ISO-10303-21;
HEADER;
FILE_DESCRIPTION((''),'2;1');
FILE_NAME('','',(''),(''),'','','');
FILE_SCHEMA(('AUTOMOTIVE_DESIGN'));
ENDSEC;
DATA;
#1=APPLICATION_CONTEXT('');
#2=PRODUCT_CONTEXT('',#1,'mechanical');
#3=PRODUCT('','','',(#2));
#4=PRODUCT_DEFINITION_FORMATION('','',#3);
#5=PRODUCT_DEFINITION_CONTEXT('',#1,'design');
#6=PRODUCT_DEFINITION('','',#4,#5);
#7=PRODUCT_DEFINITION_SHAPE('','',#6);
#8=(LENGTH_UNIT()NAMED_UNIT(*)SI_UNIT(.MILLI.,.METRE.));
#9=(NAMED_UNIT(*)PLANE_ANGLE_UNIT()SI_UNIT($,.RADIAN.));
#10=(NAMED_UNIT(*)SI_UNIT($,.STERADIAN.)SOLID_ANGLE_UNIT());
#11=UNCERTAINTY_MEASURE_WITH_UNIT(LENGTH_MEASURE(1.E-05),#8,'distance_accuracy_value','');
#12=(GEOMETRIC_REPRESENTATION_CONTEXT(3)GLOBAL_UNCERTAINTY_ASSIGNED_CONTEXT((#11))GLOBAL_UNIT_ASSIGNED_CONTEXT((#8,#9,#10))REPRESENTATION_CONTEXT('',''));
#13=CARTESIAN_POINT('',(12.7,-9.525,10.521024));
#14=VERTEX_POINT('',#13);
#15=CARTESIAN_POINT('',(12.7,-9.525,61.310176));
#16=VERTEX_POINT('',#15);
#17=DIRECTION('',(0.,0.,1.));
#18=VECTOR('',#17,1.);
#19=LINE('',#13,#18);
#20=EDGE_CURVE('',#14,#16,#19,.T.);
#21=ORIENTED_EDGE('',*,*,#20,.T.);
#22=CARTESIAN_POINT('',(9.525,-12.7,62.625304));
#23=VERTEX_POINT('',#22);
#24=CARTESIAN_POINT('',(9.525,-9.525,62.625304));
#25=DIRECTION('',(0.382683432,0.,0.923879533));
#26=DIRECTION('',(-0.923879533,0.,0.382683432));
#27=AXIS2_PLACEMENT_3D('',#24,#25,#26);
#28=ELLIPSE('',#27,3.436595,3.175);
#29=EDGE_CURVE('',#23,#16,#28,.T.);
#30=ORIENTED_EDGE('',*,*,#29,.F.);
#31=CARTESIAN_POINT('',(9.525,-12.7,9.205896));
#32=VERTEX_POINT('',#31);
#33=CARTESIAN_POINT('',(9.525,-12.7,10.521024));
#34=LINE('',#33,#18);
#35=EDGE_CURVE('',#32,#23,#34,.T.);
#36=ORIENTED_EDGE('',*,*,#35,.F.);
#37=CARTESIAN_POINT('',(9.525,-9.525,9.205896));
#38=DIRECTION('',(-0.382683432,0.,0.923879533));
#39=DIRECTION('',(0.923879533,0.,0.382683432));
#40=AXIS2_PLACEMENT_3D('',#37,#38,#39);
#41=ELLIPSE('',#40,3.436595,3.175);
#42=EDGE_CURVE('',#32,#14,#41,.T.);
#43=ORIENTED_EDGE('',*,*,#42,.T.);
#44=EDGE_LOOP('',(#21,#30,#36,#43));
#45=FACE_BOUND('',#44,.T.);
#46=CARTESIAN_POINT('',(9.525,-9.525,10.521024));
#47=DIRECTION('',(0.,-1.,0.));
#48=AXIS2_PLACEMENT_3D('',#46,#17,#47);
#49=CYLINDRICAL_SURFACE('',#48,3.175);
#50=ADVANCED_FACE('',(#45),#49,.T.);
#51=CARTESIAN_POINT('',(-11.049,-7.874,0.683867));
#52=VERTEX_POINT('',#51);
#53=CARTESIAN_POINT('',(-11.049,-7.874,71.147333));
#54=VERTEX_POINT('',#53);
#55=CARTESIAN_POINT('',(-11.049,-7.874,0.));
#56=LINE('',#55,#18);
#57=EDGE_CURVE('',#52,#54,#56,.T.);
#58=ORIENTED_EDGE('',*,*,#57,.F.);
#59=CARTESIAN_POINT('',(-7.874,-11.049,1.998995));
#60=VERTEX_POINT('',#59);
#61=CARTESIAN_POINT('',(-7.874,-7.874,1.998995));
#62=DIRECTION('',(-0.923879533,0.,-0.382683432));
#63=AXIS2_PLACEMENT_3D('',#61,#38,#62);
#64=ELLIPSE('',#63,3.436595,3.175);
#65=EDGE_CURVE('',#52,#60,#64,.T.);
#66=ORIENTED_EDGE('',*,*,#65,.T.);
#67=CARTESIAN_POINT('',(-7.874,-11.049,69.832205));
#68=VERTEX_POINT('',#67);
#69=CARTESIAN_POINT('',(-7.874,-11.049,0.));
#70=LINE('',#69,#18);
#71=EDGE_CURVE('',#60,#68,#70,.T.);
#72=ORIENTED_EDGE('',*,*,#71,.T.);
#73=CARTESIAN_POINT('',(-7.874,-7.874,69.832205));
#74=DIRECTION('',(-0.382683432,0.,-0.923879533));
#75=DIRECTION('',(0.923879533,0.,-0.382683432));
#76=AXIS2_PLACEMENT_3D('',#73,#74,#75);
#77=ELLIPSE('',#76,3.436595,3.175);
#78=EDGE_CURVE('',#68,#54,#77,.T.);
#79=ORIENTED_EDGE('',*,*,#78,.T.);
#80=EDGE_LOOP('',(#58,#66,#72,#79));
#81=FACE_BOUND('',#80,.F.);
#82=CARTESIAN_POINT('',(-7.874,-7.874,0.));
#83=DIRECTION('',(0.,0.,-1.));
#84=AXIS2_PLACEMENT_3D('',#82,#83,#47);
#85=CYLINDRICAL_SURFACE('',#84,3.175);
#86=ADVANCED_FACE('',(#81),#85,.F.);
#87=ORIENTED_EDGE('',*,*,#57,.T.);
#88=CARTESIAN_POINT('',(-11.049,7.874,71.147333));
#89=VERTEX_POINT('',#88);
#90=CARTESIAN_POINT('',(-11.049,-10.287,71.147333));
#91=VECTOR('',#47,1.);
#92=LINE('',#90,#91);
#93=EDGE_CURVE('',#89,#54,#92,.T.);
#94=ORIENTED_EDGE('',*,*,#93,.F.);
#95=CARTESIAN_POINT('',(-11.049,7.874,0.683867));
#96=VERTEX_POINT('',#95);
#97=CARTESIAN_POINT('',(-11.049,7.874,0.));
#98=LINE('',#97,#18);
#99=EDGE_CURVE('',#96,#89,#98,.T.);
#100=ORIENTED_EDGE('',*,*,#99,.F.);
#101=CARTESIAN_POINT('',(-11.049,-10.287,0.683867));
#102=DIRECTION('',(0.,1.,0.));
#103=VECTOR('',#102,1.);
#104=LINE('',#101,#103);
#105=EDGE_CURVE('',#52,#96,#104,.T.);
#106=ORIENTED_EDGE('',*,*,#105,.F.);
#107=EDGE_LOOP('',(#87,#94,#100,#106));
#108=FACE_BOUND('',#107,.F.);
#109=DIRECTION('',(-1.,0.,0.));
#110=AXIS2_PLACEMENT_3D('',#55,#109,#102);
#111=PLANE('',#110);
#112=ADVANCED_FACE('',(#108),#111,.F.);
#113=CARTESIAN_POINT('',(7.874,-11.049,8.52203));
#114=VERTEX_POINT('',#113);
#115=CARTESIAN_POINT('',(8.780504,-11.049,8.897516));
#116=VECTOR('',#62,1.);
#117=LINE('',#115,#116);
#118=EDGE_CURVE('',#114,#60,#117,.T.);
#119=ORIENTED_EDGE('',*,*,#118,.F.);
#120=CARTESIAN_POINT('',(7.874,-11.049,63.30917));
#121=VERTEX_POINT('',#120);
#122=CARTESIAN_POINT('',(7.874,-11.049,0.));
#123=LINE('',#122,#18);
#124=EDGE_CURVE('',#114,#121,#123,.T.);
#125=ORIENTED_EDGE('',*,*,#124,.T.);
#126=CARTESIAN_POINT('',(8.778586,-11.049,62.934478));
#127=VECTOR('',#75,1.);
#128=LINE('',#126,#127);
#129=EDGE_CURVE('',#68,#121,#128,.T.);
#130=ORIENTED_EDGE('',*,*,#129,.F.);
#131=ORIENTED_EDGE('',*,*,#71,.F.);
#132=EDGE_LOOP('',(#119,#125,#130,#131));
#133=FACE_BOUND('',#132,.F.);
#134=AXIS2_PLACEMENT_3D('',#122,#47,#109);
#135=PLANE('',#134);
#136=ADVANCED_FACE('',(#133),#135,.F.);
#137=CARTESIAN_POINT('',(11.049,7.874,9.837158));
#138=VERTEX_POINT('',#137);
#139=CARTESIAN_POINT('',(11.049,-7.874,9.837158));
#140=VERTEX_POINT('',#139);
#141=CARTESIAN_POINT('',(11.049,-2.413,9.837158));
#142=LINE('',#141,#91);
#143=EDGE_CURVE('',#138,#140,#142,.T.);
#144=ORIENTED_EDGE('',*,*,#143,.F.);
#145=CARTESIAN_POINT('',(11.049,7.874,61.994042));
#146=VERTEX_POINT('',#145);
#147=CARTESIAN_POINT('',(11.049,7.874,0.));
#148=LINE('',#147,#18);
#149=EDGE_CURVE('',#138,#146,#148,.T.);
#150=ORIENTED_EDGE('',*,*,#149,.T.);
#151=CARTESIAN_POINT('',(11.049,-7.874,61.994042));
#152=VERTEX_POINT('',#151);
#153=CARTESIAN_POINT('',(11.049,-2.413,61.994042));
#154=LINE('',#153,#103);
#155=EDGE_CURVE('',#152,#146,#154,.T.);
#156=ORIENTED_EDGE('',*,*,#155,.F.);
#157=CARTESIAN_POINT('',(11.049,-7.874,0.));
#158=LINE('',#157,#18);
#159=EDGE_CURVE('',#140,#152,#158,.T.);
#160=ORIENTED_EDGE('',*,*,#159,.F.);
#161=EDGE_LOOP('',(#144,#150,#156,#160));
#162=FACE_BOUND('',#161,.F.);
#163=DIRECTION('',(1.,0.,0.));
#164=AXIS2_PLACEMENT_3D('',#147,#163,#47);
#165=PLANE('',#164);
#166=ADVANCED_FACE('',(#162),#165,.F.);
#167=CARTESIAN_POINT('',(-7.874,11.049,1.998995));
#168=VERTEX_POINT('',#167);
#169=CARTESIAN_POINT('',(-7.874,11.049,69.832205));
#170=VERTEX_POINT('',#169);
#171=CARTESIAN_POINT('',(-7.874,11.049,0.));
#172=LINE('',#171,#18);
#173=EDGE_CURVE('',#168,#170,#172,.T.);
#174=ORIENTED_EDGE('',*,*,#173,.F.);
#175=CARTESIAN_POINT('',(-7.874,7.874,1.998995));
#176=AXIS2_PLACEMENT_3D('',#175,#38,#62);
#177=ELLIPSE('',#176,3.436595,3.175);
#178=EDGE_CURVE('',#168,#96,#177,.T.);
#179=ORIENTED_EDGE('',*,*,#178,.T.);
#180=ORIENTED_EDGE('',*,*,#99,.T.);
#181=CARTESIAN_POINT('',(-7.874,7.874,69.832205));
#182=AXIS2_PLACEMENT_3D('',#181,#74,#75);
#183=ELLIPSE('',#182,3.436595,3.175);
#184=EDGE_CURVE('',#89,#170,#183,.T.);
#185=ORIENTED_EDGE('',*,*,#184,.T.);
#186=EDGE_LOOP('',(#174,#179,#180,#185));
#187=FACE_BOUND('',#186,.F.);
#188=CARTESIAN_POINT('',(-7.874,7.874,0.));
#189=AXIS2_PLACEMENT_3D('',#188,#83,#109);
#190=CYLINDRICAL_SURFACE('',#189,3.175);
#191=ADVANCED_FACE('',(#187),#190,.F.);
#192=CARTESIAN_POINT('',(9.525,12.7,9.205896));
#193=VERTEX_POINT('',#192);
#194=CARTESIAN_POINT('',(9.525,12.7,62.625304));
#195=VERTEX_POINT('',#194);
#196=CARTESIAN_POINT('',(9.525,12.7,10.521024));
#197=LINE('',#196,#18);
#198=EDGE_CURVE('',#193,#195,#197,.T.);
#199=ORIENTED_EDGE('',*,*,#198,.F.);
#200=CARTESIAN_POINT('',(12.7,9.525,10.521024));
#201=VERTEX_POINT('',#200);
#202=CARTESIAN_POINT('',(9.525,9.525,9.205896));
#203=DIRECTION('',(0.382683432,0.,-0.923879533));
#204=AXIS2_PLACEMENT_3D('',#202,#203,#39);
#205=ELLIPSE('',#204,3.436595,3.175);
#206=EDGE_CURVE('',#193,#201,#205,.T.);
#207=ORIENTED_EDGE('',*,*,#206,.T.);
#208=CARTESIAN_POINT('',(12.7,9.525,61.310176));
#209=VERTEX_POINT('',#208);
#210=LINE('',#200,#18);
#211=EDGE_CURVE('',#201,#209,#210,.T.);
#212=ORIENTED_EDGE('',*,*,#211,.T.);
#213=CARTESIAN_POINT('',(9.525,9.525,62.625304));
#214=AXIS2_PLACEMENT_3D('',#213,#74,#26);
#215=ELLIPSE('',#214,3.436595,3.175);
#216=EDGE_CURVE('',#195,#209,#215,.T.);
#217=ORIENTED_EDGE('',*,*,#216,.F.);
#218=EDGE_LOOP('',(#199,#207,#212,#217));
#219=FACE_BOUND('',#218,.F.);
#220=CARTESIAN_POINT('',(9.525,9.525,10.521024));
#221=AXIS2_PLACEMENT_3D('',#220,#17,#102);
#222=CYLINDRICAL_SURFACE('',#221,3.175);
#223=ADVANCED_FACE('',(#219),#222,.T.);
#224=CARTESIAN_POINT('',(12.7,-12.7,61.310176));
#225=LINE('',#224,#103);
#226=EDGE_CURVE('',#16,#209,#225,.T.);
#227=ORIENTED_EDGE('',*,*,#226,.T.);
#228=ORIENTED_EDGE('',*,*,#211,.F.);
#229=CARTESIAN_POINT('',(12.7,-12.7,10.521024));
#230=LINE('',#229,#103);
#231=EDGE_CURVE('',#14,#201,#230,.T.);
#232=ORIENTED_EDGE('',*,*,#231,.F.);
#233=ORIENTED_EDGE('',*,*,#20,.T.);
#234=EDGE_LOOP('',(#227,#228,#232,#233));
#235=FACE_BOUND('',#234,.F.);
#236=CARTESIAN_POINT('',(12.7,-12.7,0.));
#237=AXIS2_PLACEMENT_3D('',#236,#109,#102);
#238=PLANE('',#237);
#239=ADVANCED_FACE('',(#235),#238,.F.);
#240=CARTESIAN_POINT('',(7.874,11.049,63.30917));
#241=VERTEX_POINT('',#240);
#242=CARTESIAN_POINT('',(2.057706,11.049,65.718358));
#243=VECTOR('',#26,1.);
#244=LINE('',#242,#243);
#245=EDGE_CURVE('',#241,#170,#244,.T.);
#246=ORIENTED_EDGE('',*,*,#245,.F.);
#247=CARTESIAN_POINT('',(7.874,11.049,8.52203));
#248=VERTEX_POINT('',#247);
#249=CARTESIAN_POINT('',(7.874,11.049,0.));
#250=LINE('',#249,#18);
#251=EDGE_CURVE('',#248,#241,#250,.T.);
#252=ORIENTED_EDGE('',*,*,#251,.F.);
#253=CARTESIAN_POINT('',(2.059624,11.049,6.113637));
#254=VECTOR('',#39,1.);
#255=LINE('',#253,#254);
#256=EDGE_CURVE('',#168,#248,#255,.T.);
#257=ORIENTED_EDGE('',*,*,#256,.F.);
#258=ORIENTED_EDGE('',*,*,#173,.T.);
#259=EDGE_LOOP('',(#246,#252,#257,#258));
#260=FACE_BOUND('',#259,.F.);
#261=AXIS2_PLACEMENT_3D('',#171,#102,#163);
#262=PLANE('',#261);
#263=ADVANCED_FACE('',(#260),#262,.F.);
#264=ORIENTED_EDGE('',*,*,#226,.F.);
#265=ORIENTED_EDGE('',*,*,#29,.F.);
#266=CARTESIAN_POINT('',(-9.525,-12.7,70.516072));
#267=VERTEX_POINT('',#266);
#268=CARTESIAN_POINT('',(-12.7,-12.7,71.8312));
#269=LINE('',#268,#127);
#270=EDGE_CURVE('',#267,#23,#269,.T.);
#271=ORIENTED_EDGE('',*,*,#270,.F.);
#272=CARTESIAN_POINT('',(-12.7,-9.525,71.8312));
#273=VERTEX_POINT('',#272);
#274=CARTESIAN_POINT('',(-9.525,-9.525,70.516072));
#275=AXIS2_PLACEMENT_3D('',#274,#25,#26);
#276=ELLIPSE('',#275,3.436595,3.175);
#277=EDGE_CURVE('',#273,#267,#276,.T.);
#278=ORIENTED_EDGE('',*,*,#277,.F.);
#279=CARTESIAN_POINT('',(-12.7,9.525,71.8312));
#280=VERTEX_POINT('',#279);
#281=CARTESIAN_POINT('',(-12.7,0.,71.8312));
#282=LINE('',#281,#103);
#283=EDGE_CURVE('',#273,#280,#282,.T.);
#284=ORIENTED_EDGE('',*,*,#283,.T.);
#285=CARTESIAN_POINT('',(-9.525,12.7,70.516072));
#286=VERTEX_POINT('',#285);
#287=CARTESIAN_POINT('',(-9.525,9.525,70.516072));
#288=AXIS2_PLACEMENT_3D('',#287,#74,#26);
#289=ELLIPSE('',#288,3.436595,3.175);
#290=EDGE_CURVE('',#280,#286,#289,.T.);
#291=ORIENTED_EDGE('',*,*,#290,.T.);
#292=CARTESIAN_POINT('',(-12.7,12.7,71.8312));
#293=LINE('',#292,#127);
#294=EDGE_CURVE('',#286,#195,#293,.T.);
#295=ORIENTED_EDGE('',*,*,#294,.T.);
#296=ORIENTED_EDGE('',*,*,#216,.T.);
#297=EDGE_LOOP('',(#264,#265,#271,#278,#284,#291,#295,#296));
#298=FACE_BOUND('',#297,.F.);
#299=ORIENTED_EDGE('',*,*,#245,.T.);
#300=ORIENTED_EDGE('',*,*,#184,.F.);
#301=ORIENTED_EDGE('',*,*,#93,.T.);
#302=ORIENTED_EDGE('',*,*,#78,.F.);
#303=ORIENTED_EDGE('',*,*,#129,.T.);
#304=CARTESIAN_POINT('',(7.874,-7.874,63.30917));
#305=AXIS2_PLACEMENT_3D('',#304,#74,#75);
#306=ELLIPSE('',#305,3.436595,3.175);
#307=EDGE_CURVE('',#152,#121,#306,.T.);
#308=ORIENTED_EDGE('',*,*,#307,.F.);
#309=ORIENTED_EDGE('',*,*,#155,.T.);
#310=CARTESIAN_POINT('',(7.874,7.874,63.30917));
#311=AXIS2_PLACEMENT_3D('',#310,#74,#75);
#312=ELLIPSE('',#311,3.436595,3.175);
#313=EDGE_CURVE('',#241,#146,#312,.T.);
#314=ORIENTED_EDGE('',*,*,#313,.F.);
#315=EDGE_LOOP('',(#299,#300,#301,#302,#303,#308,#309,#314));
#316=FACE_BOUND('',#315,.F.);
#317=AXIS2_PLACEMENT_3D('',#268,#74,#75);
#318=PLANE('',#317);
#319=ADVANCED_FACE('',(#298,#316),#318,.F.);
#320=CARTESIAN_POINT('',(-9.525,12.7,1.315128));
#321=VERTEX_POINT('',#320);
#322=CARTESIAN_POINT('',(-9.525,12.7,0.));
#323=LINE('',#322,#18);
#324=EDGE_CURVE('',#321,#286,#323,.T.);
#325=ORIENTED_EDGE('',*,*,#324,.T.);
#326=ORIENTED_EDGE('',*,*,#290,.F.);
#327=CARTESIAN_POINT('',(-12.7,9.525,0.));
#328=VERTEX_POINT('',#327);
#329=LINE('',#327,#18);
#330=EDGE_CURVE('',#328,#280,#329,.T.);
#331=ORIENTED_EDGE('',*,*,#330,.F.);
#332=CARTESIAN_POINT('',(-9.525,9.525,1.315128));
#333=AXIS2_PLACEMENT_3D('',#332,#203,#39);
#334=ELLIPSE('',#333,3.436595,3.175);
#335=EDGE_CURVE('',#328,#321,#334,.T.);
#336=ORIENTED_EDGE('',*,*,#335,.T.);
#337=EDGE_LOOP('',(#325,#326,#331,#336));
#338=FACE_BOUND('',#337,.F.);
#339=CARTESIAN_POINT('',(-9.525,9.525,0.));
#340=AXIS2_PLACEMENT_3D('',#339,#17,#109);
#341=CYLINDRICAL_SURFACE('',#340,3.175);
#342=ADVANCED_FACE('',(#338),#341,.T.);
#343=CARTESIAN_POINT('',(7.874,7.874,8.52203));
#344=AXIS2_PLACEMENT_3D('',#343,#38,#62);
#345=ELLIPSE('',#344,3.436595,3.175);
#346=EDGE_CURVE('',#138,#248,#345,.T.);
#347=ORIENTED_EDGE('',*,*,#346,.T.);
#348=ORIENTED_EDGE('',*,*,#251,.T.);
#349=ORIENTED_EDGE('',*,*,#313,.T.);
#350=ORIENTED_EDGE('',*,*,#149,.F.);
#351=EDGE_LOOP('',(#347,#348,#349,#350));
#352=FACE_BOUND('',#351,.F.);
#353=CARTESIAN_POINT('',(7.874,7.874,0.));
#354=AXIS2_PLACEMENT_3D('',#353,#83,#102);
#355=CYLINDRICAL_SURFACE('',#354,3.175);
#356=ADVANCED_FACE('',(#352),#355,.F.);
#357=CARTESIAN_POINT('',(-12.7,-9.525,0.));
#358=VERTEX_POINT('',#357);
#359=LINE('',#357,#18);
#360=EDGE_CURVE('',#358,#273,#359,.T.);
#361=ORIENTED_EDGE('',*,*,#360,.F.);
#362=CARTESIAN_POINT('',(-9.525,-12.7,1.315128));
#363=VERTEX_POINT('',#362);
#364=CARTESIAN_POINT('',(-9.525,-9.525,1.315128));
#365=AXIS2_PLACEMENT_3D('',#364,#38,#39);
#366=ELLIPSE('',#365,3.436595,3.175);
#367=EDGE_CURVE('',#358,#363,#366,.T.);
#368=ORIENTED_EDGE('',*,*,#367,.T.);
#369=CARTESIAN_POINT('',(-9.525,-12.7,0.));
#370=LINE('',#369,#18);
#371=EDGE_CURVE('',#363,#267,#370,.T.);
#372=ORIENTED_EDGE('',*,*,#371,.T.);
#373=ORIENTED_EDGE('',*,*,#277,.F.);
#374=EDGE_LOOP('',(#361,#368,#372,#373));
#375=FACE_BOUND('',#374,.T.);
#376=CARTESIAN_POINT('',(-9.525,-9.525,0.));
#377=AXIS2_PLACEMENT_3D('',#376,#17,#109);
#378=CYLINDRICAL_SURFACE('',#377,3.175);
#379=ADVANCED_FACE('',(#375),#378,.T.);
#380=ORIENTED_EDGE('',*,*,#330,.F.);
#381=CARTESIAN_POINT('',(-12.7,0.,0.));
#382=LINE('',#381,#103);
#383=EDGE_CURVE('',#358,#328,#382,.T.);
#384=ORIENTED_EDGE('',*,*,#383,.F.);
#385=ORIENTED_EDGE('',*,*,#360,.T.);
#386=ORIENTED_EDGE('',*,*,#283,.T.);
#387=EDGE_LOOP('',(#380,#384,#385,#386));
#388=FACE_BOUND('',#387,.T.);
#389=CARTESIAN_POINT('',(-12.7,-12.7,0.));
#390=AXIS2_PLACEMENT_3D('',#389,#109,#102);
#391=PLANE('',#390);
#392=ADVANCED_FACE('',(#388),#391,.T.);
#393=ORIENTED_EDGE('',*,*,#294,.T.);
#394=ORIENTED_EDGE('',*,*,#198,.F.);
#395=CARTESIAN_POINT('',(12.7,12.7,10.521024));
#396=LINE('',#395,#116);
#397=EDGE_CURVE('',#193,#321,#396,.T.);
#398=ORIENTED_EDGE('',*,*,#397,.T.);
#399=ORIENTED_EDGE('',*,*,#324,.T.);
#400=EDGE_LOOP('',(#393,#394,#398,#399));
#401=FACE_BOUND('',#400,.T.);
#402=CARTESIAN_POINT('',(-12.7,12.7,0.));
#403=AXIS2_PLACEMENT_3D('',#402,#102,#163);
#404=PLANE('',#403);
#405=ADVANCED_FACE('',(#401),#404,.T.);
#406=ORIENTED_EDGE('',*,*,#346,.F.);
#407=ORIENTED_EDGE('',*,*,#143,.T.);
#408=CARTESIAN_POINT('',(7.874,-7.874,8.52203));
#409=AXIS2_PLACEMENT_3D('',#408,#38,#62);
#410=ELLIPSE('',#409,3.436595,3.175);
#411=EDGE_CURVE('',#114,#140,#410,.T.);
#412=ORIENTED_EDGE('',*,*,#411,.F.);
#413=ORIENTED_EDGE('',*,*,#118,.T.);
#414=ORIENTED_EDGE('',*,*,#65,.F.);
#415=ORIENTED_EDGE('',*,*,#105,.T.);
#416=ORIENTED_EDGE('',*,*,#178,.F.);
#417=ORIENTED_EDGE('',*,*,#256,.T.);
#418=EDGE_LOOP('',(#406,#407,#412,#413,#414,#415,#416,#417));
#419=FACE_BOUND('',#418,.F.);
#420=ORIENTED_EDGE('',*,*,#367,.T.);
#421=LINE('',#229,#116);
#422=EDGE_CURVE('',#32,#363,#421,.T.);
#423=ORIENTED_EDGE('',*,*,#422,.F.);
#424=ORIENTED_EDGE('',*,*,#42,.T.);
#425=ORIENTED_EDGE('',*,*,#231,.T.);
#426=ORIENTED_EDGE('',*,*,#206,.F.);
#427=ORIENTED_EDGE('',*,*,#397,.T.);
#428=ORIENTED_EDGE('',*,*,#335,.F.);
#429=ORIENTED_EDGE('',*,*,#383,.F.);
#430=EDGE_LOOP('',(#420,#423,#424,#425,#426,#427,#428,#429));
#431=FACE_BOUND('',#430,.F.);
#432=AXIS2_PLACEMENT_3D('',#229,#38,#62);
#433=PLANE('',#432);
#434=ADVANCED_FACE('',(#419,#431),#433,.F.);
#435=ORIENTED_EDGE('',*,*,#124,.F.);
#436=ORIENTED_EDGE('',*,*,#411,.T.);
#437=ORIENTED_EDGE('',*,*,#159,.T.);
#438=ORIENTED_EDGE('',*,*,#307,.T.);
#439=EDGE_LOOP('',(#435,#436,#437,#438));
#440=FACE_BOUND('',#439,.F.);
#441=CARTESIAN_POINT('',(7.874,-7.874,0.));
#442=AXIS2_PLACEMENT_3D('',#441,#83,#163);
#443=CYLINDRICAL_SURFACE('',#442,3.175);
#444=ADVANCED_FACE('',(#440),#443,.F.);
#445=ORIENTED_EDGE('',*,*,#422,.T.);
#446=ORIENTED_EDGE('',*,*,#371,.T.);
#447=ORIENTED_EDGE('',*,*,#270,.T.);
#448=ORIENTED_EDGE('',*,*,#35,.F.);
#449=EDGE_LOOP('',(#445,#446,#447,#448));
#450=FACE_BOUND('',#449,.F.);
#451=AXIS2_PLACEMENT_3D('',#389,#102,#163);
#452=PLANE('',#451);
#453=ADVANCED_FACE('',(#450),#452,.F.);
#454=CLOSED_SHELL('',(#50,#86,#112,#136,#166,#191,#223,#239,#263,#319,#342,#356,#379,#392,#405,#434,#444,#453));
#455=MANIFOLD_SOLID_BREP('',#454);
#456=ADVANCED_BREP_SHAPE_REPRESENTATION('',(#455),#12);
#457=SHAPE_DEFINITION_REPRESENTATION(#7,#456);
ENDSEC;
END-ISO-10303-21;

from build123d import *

# Parameters (mm, degrees)
F1_W     = 25.4
F1_H     = 25.4
F2_DEPTH = 71.8312
F4_DEPTH = 25.4
F5_R     = 3.175


# Not quite as in the source:
# - a variable given as a bare number and used for a length is read in inches; the dataset says mm whatever the document's units were
# - a feature names something its author has since deleted; it is built from what else it names


with BuildPart() as f2:
    # F1 (on Top) → F2 (new body)
    with BuildSketch(Plane.XY):
        Rectangle(F1_W, F1_H)
        with BuildLine():
            ThreePointArc((-11.049, 7.874), (-10.1190640303, 10.1190640303), (-7.874, 11.049))
            Line((-7.874, 11.049), (7.874, 11.049))
            ThreePointArc((7.874, 11.049), (10.1190640303, 10.1190640303), (11.049, 7.874))
            Line((11.049, 7.874), (11.049, -7.874))
            ThreePointArc((11.049, -7.874), (10.1190640303, -10.1190640303), (7.874, -11.049))
            Line((7.874, -11.049), (-7.874, -11.049))
            ThreePointArc((-7.874, -11.049), (-10.1190640303, -10.1190640303), (-11.049, -7.874))
            Line((-11.049, -7.874), (-11.049, 7.874))
        make_face(mode=Mode.SUBTRACT)
    extrude(amount=F2_DEPTH)

    # F3 (on face) → F4 (cut)
    with BuildSketch(Plane.XZ.offset(12.7)):
        Polygon((12.7, 10.5210244843), (-12.7, 0), (12.7, 0), align=None)
        Polygon((12.7, 71.8312), (-12.7, 71.8312), (12.7, 61.3101755157), align=None)
    extrude(amount=-F4_DEPTH, mode=Mode.SUBTRACT)

    # F5
    f5_edges = [f2.edges().sort_by_distance(p)[0] for p in [
        (-12.7, 12.7, 35.9156),
        (12.7, 12.7, 35.9156),
        (-12.7, -12.7, 35.9156),
        (12.7, -12.7, 35.9156),
    ]]
    fillet(f5_edges, radius=F5_R)


solid = f2.part
